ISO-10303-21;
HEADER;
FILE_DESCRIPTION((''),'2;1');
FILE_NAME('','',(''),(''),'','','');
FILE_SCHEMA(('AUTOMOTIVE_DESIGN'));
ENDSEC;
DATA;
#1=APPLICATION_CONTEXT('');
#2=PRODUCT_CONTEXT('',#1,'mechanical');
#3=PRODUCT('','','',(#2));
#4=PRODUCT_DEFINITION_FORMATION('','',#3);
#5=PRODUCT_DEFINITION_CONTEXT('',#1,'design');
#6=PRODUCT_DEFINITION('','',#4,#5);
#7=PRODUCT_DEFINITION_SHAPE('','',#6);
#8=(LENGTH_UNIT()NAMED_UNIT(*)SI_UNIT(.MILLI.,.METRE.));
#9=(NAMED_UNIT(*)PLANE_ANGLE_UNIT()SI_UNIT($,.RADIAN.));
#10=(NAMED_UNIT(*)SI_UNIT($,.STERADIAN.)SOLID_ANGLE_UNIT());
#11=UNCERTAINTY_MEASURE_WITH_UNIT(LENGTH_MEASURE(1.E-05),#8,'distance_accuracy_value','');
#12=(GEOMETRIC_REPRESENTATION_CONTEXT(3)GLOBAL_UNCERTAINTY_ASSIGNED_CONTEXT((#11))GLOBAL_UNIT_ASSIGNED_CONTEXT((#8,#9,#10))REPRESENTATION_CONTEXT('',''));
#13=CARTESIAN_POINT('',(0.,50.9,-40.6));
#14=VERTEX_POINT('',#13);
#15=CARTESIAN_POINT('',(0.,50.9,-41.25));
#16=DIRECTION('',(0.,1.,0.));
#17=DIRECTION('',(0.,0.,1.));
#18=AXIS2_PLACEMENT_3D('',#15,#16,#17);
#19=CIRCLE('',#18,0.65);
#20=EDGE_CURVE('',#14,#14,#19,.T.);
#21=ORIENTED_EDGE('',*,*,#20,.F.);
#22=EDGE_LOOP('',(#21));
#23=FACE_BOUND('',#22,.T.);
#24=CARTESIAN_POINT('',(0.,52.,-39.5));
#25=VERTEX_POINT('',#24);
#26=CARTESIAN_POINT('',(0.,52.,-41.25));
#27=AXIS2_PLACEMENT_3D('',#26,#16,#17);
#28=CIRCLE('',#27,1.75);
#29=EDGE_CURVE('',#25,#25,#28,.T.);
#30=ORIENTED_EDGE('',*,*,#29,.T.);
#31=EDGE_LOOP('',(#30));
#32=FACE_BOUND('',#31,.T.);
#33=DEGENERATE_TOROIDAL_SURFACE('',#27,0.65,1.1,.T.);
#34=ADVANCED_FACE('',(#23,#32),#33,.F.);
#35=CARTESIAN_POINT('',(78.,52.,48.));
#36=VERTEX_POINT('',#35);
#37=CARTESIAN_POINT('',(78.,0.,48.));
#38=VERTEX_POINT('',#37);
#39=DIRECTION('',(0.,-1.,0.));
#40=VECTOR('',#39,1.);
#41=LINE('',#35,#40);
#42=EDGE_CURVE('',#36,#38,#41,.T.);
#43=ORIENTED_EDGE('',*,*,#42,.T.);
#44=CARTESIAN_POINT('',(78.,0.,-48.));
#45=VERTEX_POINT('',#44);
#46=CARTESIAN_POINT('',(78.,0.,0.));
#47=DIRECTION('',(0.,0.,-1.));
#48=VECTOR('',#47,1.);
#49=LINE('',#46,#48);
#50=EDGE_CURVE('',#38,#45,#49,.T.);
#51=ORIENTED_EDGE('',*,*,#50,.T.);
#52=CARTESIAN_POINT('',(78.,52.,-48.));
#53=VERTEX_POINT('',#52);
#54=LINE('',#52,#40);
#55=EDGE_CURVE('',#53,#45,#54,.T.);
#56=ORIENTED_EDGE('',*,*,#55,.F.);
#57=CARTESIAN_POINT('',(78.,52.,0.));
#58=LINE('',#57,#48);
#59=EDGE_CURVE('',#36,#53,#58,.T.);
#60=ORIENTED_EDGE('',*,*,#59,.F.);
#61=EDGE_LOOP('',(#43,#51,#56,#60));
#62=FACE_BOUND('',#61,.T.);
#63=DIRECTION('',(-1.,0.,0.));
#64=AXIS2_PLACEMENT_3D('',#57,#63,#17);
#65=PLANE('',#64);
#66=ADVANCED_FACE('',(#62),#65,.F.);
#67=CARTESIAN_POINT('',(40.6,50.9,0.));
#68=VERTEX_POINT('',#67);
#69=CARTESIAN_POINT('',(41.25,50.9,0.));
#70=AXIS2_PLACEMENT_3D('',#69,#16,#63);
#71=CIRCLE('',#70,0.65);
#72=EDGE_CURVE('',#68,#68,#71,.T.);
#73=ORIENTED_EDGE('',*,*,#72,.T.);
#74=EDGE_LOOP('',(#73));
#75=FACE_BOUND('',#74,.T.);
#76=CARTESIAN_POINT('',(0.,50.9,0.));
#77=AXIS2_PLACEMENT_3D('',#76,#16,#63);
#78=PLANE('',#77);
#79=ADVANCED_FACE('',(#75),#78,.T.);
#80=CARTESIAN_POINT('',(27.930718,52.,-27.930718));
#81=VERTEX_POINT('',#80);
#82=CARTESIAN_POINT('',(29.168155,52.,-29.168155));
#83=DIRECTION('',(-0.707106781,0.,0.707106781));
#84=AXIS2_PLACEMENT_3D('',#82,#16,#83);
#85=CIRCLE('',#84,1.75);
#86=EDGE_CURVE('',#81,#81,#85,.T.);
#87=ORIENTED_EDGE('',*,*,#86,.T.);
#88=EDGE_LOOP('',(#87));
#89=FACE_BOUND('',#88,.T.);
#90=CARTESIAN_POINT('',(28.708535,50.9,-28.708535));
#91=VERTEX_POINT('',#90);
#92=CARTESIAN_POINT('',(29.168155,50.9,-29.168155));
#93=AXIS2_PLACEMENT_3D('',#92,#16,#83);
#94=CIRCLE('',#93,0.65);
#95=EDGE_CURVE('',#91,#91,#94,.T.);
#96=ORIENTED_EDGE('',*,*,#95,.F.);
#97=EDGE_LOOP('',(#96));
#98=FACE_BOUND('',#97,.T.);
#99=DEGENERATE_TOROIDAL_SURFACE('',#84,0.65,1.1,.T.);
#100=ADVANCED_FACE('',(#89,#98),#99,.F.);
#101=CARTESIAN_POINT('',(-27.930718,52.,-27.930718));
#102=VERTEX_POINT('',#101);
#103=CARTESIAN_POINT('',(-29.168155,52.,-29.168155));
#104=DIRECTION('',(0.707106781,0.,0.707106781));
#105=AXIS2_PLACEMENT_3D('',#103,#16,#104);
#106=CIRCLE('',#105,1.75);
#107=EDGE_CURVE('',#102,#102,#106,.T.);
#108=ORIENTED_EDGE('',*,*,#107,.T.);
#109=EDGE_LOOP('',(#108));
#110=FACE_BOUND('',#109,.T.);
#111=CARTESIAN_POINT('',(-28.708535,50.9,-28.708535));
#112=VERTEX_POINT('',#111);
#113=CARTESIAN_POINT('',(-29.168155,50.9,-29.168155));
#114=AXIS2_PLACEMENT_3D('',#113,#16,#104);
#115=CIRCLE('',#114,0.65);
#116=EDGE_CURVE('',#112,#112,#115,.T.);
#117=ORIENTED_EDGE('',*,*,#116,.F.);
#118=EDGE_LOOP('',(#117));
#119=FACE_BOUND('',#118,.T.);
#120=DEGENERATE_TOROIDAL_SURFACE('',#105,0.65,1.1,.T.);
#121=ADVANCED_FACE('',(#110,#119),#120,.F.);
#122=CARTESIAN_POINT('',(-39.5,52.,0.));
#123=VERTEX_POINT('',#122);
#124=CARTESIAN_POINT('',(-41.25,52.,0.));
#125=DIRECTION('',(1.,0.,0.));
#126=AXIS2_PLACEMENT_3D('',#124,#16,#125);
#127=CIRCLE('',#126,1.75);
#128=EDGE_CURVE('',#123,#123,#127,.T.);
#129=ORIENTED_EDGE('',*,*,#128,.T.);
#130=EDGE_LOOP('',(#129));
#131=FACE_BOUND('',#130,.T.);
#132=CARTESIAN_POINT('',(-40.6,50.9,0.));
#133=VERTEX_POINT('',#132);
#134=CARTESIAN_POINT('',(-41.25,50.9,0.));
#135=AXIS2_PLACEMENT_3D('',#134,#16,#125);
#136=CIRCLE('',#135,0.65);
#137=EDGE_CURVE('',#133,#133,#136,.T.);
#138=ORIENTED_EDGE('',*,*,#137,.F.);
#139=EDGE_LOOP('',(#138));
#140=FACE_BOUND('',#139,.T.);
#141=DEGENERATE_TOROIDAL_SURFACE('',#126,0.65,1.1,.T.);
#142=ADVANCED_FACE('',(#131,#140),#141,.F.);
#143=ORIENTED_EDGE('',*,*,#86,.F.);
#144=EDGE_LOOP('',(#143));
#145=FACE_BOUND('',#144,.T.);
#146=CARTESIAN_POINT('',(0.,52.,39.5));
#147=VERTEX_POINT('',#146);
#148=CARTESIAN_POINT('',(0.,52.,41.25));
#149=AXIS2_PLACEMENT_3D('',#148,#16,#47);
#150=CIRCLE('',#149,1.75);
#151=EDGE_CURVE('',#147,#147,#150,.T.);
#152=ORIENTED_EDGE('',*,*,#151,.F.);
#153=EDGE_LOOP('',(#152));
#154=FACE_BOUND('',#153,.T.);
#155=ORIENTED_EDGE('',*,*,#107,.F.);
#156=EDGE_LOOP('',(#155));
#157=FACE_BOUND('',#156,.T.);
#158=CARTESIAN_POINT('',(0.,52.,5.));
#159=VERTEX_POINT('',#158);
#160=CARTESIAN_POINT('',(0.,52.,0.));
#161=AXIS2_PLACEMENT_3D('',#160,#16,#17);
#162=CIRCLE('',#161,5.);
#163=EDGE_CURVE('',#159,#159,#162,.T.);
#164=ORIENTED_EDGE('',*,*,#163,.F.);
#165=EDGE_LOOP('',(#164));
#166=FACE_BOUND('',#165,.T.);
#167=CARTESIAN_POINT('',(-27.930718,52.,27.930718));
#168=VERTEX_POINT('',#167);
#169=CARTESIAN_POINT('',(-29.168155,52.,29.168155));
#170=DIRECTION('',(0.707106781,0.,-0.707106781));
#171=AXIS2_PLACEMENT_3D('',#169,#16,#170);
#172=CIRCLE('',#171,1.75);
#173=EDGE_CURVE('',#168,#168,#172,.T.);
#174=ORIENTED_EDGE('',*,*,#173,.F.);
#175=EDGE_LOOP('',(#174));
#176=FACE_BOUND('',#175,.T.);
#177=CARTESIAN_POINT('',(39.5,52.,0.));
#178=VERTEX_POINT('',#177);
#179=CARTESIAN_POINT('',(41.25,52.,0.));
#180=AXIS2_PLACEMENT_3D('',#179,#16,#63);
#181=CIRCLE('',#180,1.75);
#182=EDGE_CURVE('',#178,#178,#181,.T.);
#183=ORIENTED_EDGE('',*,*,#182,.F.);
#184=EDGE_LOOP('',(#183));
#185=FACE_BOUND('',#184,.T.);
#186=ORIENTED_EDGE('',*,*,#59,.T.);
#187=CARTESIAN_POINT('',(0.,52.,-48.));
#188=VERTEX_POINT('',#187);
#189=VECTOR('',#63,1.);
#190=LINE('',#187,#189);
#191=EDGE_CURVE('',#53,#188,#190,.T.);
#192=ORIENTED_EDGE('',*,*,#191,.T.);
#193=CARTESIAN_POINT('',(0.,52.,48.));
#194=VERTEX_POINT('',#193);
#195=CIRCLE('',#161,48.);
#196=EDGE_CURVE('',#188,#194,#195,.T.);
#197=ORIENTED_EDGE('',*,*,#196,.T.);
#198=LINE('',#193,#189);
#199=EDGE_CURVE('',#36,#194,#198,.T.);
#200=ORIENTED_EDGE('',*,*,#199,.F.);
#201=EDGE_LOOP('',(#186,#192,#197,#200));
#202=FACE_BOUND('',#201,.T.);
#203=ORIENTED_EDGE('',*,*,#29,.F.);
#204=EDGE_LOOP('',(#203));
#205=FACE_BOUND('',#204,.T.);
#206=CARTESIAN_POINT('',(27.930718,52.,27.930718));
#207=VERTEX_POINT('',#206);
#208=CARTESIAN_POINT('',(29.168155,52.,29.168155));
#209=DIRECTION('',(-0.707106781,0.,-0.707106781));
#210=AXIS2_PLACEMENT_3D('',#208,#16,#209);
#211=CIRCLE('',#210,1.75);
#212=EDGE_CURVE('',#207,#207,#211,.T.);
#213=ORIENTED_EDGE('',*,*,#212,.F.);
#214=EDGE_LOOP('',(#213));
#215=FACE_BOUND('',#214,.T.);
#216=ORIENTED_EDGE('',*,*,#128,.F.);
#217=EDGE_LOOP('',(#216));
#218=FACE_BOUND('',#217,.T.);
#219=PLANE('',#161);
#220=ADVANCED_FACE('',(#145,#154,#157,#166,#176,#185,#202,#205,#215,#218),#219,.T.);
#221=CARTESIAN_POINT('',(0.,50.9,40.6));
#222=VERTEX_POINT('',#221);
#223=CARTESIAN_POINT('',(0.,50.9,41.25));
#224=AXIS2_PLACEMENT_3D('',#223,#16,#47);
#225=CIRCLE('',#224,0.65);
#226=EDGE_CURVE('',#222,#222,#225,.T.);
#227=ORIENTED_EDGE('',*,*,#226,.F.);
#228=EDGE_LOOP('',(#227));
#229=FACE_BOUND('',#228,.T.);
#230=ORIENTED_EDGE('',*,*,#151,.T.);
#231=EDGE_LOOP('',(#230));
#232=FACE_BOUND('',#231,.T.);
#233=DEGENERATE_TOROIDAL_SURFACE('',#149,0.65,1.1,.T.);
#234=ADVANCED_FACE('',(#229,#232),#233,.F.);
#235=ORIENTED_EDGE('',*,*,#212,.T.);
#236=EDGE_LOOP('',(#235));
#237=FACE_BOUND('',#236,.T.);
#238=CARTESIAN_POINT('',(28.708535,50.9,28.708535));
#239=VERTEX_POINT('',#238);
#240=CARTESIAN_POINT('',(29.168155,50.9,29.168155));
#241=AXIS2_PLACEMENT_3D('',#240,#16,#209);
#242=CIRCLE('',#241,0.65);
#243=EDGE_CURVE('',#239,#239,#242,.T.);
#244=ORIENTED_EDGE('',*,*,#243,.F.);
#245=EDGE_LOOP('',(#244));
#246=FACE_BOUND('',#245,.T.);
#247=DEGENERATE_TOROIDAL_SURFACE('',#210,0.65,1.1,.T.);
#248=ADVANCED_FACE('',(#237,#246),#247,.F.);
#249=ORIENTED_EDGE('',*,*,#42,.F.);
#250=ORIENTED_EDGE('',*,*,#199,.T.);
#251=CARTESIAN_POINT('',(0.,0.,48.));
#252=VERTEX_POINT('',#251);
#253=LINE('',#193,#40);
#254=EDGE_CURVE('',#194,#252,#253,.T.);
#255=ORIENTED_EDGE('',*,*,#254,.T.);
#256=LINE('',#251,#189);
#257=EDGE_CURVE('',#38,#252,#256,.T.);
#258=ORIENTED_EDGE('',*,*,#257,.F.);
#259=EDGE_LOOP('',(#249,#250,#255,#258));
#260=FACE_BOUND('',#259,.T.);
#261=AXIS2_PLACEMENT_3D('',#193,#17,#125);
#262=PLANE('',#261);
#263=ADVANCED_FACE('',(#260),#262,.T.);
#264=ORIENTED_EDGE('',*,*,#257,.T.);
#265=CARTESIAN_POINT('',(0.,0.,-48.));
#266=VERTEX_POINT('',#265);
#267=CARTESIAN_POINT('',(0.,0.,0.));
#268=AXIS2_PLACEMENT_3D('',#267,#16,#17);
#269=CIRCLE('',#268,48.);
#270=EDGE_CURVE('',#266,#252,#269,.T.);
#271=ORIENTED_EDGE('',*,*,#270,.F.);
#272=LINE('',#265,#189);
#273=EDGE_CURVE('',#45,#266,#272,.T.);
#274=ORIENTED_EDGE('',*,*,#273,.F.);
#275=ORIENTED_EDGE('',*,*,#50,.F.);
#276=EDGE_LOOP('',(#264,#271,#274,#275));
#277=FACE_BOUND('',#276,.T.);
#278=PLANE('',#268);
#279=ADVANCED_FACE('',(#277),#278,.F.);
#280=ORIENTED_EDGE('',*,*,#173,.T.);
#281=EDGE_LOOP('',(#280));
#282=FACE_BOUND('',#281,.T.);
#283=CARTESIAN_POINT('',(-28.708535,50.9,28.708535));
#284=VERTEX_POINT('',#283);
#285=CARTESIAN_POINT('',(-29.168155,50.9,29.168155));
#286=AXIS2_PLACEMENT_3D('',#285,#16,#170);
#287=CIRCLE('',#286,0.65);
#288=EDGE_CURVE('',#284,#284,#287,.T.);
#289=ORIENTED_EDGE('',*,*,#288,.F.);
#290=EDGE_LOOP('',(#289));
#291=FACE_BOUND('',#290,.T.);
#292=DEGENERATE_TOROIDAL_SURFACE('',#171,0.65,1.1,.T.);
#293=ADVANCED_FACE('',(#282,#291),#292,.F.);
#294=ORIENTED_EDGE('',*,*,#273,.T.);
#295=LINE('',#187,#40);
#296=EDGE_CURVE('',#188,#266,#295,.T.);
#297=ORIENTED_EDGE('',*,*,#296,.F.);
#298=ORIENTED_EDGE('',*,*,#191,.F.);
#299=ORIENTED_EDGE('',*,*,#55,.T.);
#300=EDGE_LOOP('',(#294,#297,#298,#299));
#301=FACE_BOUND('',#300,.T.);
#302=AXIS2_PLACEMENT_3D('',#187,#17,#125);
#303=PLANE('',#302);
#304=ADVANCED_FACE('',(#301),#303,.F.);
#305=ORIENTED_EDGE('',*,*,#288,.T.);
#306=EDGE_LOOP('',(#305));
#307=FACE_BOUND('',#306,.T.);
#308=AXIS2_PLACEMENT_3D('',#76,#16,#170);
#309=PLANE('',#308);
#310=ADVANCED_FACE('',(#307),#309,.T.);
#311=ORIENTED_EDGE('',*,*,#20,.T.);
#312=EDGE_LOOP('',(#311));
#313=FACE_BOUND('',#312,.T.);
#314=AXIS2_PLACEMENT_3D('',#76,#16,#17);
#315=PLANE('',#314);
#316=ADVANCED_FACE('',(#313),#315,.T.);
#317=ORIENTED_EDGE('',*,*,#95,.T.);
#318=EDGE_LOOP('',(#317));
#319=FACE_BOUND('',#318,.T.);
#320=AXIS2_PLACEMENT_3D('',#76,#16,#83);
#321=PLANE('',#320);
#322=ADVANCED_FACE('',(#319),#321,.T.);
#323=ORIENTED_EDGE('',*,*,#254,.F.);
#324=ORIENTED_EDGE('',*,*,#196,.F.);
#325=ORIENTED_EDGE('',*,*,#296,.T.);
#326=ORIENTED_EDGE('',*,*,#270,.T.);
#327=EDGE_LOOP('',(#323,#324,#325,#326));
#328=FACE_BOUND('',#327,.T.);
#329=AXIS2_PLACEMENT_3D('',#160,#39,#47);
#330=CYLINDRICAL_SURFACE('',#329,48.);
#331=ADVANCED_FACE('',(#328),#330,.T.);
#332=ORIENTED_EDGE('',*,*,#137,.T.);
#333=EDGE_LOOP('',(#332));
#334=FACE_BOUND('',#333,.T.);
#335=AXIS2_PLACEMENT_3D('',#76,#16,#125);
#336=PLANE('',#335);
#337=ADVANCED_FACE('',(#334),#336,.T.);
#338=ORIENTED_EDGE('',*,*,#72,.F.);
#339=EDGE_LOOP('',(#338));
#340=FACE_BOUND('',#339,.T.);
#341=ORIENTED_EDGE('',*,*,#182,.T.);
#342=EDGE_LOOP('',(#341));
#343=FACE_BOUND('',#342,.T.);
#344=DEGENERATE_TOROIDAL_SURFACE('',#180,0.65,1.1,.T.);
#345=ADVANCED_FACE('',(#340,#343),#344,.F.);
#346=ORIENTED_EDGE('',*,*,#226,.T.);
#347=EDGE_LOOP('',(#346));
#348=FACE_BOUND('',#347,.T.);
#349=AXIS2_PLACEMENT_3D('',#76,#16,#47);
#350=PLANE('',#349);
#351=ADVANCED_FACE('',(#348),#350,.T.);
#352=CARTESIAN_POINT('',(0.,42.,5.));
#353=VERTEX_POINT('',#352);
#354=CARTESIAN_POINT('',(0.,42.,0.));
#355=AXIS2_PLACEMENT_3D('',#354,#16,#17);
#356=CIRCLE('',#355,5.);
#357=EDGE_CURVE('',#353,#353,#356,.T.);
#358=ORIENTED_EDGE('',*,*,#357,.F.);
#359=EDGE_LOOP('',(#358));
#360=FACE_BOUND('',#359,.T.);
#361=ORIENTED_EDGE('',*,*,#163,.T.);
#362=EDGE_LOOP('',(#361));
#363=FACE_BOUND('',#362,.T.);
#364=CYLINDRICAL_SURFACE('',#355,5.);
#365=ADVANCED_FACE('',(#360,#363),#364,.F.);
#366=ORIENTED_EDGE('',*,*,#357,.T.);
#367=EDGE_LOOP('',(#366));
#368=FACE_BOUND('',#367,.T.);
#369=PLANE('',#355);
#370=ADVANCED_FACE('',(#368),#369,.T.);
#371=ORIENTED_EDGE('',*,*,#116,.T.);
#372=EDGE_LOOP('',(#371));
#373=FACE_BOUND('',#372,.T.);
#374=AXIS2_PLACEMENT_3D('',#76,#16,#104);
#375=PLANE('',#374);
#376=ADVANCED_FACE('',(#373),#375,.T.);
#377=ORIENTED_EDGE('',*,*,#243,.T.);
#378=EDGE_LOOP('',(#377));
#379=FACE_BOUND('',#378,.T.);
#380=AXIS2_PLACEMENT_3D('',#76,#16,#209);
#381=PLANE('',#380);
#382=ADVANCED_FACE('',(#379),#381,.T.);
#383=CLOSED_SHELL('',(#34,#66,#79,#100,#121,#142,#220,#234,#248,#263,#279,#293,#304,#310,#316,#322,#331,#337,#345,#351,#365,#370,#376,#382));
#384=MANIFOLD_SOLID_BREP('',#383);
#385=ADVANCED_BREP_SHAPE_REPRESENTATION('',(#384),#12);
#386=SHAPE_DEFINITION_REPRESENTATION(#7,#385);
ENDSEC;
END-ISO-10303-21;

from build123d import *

# Parameters (mm, degrees)
SALIENTE_EXTRUIR1_DEPTH = 52
CROQUIS2_R              = 1.75
CORTAR_EXTRUIR1_DEPTH   = 1.1
REDONDEO1_R             = 1.1
MATRIZC3_COUNT          = 8
REDONDEO1_OF_MATRIZC3_R = 1.1
CROQUIS3_R              = 5
CORTAR_EXTRUIR2_DEPTH   = 10


with BuildPart() as part:
    # Croquis1 → Saliente-Extruir1 (new body)
    with BuildSketch(Plane(origin=(0, 0, 0), x_dir=(1, 0, 0), z_dir=(0, 1, 0))):
        with BuildLine():
            ThreePointArc((0, 48), (-48, 0), (0, -48))
            Line((0, -48), (0, 48))
        make_face()
        with BuildLine():
            Line((0, 48), (0, -48))
            ThreePointArc((0, -48), (33.941125497, -33.941125497), (48, 0))
            ThreePointArc((48, 0), (33.941125497, 33.941125497), (0, 48))
        make_face()
        with BuildLine():
            Line((0, -48), (78, -48))
            Line((78, -48), (78, 48))
            Line((78, 48), (0, 48))
            ThreePointArc((0, 48), (33.941125497, 33.941125497), (48, 0))
            ThreePointArc((48, 0), (33.941125497, -33.941125497), (0, -48))
        make_face()
    extrude(amount=SALIENTE_EXTRUIR1_DEPTH)

    # Croquis2 → Cortar-Extruir1 (cut)
    with BuildSketch(Plane(origin=(0, 52, 0), x_dir=(1, 0, 0), z_dir=(0, 1, 0))):
        with Locations(Location((0, 41.25, 0), (0, 0, 270))):
            Circle(CROQUIS2_R)
    cortar_extruir1 = extrude(amount=-CORTAR_EXTRUIR1_DEPTH, mode=Mode.SUBTRACT)

    # Redondeo1
    redondeo1_edges = [part.edges().sort_by_distance(p)[0] for p in [
        (0, 50.9, -43),
    ]]
    fillet(redondeo1_edges, radius=REDONDEO1_R - 0.0001)  # a hair under: the kernel refuses the full size

    # MatrizC3: Cortar-Extruir1 ×8 about axis
    matrizc3_axis = Axis((0, 0, 0), (0, 1, 0))
    for i in range(1, MATRIZC3_COUNT):
        add(cortar_extruir1.rotate(matrizc3_axis, i * 360 / MATRIZC3_COUNT), mode=Mode.SUBTRACT)

    # Redondeo1 of MatrizC3
    redondeo1_of_matrizc3_edges = [part.edges().sort_by_distance(p)[0] for p in [
        (-30.405591591, 50.9, -30.405591591),
        (-43, 50.9, 0),
        (-30.405591591, 50.9, 30.405591591),
        (0, 50.9, 43),
        (30.405591591, 50.9, 30.405591591),
        (43, 50.9, 0),
        (30.405591591, 50.9, -30.405591591),
    ]]
    fillet(redondeo1_of_matrizc3_edges, radius=REDONDEO1_OF_MATRIZC3_R - 0.0001)  # a hair under: the kernel refuses the full size

    # Croquis3 → Cortar-Extruir2 (cut)
    with BuildSketch(Plane(origin=(0, 52, 0), x_dir=(1, 0, 0), z_dir=(0, 1, 0))):
        with Locations(Location((0, 0, 0), (0, 0, 270))):
            Circle(CROQUIS3_R)
    extrude(amount=-CORTAR_EXTRUIR2_DEPTH, mode=Mode.SUBTRACT)


solid = part.part
